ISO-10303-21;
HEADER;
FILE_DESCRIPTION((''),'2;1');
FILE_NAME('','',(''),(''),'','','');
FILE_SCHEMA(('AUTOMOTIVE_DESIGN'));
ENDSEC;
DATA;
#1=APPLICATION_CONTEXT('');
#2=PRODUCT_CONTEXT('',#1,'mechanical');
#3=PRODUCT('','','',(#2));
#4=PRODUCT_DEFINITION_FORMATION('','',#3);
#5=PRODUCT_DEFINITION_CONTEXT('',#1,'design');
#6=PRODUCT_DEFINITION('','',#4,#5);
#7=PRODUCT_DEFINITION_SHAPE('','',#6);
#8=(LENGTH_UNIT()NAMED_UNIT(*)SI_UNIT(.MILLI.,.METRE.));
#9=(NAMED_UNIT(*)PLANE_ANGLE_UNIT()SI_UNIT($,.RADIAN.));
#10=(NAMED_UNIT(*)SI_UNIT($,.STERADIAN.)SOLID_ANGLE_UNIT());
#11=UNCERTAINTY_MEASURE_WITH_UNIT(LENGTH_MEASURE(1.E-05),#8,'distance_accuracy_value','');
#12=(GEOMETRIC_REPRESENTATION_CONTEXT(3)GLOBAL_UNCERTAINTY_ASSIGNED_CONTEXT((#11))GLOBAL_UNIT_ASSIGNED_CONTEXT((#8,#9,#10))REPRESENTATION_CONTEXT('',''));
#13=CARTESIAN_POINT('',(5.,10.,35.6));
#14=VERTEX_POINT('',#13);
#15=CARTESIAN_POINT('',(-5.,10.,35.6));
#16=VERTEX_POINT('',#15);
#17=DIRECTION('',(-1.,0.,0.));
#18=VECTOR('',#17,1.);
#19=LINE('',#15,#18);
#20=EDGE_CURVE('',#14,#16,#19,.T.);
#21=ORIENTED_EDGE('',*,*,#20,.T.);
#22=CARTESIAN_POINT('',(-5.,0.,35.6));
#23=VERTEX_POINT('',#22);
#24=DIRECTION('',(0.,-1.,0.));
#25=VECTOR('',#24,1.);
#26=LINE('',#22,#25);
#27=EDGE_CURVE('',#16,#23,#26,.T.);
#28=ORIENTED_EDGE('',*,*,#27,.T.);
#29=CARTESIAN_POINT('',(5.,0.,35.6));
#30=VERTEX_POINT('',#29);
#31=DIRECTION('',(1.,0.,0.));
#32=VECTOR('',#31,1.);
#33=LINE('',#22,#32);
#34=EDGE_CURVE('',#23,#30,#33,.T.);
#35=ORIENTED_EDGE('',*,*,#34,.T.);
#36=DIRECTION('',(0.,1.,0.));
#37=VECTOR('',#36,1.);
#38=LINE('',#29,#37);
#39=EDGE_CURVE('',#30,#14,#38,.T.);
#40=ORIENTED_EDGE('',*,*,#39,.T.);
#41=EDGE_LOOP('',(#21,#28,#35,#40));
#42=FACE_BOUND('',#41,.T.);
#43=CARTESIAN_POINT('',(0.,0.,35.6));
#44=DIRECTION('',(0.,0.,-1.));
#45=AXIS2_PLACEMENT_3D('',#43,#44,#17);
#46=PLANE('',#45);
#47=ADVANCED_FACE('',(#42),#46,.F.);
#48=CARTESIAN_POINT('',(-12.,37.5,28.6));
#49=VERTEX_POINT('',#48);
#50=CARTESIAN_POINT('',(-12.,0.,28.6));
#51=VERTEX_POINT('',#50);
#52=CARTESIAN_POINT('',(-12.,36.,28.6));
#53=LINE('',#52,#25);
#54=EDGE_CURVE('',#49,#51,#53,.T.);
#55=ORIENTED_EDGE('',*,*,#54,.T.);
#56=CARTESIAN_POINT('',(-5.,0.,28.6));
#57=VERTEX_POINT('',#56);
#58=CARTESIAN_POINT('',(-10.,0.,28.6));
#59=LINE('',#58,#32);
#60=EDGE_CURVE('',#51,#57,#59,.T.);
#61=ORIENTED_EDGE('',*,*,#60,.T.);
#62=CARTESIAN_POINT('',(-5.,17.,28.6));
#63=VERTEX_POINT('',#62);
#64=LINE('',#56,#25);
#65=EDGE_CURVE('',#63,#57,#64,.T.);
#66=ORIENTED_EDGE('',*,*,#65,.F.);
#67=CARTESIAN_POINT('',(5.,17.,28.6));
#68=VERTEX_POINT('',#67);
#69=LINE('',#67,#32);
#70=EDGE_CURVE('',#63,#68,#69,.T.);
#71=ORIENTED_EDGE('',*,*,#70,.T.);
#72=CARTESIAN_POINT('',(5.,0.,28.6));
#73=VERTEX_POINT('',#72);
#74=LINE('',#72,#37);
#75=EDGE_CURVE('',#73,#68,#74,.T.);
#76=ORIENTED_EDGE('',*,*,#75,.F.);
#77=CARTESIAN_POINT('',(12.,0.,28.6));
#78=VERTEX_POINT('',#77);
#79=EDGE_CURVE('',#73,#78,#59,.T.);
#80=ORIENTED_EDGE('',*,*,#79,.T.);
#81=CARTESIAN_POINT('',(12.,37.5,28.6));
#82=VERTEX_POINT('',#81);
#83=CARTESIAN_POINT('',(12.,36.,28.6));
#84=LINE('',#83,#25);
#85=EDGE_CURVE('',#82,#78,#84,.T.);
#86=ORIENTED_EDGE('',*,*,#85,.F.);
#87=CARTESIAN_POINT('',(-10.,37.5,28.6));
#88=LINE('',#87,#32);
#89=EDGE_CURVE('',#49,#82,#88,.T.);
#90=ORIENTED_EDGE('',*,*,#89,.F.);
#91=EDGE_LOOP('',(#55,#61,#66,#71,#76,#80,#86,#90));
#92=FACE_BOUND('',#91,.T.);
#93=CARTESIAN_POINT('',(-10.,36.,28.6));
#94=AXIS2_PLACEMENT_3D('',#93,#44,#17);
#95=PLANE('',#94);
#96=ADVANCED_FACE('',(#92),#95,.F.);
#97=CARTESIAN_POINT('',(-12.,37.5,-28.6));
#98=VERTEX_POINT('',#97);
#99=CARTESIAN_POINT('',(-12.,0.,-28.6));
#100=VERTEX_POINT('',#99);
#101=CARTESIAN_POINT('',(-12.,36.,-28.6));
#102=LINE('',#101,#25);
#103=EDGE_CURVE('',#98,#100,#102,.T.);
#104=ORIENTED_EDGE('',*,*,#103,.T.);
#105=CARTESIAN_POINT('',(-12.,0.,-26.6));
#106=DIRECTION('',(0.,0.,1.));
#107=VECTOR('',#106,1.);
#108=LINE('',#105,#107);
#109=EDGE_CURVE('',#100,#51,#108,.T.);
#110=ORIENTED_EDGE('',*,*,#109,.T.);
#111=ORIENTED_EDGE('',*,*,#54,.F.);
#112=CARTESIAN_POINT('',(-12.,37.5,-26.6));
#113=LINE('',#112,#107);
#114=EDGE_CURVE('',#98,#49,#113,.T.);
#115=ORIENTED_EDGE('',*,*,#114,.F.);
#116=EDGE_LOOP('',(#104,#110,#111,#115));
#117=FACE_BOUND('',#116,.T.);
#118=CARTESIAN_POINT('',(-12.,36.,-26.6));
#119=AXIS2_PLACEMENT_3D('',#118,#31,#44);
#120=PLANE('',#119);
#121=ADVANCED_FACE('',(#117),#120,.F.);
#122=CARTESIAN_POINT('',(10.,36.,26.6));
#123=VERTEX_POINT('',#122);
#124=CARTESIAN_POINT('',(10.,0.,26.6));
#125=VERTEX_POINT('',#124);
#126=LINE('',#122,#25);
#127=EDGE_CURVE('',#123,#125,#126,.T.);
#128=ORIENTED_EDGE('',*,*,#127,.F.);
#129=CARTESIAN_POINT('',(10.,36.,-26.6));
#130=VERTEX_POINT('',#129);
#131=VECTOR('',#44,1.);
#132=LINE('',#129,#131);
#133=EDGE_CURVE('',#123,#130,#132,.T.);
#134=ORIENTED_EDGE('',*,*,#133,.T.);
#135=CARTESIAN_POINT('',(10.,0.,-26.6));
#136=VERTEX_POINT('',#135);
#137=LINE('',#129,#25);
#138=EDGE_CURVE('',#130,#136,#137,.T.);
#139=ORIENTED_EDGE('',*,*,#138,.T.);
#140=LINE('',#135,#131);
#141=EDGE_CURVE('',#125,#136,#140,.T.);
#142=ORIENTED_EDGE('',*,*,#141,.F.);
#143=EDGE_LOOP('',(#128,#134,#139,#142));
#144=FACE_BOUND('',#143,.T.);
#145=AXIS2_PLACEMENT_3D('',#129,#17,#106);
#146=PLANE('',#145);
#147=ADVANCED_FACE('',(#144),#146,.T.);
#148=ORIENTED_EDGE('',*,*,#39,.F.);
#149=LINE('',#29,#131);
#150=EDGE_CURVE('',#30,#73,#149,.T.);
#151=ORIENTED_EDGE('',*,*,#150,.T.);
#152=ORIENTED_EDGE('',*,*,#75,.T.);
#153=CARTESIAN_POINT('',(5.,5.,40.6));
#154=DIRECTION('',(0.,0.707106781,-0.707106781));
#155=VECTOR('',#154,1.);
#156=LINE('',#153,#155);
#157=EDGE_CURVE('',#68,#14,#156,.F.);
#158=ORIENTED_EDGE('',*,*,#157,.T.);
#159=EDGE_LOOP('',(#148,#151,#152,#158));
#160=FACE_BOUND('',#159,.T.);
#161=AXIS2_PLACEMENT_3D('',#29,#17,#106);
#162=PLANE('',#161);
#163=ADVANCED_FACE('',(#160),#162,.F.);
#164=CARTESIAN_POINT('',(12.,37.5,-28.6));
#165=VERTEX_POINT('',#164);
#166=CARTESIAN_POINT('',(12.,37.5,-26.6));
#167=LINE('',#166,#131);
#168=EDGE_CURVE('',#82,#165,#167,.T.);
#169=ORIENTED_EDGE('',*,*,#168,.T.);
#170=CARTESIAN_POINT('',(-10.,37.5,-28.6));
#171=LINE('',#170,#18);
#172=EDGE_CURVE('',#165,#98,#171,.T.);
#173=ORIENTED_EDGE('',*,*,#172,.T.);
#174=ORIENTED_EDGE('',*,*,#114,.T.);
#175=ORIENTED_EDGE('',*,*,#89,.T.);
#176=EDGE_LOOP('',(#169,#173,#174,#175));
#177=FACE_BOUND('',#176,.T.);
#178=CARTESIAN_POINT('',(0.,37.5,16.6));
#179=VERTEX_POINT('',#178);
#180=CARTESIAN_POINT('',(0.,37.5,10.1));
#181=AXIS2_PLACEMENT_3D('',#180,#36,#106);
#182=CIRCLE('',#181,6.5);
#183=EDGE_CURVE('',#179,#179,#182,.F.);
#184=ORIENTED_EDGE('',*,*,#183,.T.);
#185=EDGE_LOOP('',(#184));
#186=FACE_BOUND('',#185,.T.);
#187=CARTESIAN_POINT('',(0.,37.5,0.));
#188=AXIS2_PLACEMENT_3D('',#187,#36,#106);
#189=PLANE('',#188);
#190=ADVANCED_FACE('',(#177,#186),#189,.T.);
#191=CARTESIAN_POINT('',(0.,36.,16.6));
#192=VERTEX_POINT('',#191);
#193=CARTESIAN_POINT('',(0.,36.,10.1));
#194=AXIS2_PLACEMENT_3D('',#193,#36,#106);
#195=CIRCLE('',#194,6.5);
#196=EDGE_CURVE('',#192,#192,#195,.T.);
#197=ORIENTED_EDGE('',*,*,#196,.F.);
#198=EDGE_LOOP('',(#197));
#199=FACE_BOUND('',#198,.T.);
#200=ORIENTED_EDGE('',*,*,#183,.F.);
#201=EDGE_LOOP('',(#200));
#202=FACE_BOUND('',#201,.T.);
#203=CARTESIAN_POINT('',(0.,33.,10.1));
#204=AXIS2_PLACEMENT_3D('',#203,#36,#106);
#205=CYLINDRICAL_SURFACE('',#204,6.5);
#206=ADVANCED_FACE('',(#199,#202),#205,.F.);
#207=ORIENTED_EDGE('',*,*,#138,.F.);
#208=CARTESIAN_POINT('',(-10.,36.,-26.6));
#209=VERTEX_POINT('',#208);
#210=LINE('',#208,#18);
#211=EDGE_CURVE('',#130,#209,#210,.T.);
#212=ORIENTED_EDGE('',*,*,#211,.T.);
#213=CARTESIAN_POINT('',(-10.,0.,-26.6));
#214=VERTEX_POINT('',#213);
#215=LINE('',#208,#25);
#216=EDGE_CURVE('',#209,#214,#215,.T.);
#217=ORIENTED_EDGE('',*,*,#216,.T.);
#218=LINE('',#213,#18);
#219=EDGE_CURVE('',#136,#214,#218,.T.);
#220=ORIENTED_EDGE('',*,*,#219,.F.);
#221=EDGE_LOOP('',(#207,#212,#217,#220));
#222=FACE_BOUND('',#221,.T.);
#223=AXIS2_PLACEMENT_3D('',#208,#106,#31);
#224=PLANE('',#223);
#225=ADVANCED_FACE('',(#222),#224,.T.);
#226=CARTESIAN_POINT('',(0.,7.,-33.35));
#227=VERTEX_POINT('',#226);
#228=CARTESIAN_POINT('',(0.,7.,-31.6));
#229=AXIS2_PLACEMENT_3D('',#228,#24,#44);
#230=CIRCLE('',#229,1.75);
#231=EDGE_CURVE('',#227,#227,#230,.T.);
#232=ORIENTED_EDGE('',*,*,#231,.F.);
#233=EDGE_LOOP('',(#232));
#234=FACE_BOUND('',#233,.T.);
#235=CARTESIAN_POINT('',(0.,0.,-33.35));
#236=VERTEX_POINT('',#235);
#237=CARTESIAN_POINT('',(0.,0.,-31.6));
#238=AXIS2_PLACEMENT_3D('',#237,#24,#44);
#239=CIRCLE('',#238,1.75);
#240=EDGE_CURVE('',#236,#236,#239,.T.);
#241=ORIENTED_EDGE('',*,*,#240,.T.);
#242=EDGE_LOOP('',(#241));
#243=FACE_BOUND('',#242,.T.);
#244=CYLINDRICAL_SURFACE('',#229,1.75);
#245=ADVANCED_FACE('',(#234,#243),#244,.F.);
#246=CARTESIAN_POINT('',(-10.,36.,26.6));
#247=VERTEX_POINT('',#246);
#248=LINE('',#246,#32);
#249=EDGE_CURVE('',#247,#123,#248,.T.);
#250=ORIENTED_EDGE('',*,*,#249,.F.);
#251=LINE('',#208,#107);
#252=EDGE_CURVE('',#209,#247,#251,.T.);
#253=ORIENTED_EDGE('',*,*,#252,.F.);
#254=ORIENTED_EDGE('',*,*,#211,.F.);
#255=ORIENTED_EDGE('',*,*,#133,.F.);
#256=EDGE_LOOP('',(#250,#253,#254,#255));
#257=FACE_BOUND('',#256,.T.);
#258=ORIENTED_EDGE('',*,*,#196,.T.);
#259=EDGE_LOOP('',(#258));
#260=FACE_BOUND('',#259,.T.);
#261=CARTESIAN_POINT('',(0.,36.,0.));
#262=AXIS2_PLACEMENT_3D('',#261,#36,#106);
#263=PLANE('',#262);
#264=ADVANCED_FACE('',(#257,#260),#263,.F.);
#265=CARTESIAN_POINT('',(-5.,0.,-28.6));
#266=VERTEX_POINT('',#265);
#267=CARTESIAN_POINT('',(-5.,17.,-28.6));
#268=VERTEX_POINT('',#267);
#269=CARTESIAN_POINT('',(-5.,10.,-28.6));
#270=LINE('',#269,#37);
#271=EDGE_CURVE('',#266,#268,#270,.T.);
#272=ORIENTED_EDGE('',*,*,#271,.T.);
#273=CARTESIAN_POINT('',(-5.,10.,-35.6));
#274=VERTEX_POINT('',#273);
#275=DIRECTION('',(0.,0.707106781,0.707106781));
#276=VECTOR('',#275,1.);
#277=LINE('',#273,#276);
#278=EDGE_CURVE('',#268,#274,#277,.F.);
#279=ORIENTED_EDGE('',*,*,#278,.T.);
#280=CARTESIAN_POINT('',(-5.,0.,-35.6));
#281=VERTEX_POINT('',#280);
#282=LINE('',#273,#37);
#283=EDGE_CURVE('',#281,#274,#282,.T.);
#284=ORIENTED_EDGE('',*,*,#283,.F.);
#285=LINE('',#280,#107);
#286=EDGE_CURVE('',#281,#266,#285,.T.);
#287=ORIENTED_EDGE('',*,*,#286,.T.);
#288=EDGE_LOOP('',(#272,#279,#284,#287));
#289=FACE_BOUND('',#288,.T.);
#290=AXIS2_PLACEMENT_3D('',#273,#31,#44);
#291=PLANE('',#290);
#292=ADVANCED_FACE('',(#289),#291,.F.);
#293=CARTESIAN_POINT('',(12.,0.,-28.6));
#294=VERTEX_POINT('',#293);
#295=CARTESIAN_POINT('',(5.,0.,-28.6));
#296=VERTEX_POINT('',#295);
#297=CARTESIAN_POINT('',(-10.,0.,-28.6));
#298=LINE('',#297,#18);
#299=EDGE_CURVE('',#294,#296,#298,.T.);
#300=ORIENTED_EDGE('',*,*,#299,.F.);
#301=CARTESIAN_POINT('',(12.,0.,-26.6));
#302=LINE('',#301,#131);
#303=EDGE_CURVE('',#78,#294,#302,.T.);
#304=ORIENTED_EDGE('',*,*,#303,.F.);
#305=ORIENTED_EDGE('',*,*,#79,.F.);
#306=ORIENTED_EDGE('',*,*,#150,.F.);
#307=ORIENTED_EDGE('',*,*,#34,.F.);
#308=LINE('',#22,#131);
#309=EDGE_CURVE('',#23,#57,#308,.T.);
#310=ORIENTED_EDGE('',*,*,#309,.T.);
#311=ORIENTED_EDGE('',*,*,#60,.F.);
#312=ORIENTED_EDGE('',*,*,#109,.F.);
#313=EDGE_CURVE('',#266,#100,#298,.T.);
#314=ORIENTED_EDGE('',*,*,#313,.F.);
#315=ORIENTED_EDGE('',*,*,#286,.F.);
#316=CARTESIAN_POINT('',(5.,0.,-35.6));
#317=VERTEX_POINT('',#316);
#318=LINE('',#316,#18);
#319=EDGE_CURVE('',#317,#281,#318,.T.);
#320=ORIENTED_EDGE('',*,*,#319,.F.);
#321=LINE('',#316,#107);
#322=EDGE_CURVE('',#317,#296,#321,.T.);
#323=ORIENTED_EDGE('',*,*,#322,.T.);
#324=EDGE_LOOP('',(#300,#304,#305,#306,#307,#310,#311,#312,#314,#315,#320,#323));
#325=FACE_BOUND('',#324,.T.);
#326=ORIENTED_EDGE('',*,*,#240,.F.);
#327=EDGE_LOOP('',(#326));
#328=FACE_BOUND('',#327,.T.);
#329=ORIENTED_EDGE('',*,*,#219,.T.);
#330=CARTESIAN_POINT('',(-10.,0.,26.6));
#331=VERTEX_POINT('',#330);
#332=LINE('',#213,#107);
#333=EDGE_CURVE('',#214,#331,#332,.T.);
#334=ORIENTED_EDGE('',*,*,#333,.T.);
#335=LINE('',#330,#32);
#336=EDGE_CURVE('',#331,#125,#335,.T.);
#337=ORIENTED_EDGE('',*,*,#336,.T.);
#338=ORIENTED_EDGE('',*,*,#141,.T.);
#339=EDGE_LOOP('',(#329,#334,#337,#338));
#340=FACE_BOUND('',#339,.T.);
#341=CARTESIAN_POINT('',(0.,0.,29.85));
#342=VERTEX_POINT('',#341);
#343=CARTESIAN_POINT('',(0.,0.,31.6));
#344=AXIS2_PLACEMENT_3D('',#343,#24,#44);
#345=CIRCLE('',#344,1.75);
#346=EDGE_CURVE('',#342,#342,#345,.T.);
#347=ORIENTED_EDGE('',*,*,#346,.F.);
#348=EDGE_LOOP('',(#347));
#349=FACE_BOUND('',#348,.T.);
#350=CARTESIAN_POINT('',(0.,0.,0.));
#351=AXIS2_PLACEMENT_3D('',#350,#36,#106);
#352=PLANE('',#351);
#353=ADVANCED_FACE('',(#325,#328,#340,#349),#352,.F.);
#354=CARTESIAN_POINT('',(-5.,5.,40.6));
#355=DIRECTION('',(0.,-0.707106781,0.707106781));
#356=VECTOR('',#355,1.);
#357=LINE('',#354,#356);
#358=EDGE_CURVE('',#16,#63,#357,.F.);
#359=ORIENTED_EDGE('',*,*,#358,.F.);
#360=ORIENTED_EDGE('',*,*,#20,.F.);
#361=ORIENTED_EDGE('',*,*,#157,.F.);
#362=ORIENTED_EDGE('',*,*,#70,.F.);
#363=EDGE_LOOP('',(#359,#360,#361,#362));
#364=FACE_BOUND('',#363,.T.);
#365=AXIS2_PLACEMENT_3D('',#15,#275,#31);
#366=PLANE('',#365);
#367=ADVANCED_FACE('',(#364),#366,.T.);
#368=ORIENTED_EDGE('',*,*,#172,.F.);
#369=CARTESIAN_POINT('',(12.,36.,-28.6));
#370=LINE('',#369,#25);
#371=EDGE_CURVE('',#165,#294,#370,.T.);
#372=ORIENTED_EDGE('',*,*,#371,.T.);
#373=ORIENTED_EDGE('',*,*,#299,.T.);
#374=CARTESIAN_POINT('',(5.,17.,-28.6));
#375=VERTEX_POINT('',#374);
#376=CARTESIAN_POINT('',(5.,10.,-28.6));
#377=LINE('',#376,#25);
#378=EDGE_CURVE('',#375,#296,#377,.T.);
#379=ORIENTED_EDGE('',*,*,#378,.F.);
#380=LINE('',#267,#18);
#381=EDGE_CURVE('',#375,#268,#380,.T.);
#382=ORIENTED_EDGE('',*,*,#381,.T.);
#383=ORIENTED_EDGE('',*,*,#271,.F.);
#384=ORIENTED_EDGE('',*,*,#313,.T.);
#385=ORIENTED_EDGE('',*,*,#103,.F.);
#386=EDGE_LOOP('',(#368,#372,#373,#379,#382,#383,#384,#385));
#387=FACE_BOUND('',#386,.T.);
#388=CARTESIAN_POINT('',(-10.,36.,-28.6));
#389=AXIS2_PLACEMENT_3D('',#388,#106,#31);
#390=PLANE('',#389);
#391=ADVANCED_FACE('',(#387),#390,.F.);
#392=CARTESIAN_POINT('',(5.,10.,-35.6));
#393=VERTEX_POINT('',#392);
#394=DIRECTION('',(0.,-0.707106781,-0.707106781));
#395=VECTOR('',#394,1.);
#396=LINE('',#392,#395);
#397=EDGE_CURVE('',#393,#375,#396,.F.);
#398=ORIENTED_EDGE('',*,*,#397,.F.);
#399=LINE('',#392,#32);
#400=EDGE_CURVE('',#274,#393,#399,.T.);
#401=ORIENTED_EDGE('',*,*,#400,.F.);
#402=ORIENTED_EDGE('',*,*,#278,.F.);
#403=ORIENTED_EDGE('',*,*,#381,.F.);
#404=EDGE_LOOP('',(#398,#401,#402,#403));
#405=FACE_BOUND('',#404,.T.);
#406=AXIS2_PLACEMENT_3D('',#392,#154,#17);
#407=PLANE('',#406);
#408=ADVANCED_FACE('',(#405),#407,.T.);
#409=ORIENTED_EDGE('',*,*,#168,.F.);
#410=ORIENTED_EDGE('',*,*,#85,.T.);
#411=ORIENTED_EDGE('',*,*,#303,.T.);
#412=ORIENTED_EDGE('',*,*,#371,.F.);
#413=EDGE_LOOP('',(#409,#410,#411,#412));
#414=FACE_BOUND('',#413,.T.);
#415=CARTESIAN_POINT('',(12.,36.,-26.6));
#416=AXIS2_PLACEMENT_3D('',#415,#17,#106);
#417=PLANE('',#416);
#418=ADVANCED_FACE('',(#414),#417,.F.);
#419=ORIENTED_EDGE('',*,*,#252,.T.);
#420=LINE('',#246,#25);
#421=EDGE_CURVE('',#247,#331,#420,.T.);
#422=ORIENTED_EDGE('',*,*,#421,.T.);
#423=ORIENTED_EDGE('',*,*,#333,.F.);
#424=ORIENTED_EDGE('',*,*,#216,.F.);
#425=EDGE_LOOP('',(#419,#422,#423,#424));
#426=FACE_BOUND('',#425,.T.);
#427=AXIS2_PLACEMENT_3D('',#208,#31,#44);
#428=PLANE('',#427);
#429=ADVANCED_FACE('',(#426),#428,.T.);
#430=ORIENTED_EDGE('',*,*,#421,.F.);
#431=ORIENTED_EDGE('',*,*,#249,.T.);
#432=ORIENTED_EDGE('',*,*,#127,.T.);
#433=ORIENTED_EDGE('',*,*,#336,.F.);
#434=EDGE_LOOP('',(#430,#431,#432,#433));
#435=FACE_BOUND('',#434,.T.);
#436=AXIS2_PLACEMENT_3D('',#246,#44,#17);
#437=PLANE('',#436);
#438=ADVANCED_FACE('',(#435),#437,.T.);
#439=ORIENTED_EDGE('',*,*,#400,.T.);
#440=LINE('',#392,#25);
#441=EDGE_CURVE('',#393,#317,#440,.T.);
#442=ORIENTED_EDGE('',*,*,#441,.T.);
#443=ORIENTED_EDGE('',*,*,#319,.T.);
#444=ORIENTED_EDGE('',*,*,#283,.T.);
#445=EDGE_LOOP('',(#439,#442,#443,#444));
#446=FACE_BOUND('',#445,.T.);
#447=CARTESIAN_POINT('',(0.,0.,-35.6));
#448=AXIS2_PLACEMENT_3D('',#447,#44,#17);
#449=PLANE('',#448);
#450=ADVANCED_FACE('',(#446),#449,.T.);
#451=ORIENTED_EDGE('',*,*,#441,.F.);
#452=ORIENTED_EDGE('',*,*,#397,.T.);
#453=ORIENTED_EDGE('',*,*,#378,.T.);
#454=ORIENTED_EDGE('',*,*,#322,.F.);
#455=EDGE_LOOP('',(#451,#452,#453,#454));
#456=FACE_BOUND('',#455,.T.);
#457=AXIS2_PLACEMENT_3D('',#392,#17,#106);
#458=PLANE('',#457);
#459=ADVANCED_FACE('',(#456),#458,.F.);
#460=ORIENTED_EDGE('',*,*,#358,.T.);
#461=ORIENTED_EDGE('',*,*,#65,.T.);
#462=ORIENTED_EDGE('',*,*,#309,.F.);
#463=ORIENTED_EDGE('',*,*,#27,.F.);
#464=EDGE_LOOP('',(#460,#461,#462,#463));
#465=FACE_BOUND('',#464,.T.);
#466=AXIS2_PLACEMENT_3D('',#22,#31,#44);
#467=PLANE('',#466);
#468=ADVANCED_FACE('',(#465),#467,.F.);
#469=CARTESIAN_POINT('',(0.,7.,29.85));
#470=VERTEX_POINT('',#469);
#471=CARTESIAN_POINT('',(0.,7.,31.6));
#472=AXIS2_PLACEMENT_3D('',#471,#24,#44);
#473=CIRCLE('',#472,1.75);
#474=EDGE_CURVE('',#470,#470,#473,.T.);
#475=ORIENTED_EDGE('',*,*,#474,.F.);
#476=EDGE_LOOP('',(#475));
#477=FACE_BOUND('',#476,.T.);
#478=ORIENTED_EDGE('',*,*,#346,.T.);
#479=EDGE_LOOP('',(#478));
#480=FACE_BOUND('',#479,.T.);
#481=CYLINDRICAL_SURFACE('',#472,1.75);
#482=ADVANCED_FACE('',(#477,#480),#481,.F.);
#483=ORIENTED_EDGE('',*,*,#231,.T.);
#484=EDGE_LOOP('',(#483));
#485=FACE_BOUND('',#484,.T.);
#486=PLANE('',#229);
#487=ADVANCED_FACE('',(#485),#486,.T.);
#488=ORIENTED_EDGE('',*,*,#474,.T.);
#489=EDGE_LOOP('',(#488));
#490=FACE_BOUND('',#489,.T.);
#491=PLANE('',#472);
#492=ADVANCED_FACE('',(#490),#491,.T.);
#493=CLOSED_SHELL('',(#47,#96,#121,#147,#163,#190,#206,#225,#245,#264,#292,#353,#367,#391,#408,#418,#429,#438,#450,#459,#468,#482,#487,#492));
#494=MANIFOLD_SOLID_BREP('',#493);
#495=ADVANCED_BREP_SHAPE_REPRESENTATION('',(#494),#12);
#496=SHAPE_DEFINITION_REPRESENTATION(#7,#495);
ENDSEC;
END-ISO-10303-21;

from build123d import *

# Parameters (mm, degrees)
SKETCH1_W           = 20
SKETCH1_H           = 53.2
BOSS_EXTRUDE1_DEPTH = 36
SHELL1_T            = 2
SKETCH2_R           = 6.5
CUT_EXTRUDE1_DEPTH  = 5
SKETCH3_W           = 10
SKETCH3_H           = 10
BOSS_EXTRUDE2_DEPTH = 7
SKETCH4_W           = 10
SKETCH4_H           = 10
BOSS_EXTRUDE3_DEPTH = 7
SKETCH5_R           = 1.75
CUT_EXTRUDE2_DEPTH  = 7
CHAMFER1_SIZE       = 7
SKETCH6_W           = 29.413997259
SKETCH6_H           = 62.11470898
CUT_EXTRUDE3_DEPTH  = 0.5


with BuildPart() as part:
    # Sketch1 → Boss-Extrude1 (new body)
    with BuildSketch(Plane(origin=(0, 0, 0), x_dir=(1, 0, 0), z_dir=(0, 1, 0))):
        Rectangle(SKETCH1_W, SKETCH1_H)
    extrude(amount=BOSS_EXTRUDE1_DEPTH)

    # Shell1
    shell1_openings = [part.faces().sort_by_distance(p)[0] for p in [
        (0, 0, 0),
    ]]
    offset(amount=SHELL1_T, openings=shell1_openings, kind=Kind.INTERSECTION)

    # Sketch2 → Cut-Extrude1 (cut)
    with BuildSketch(Plane(origin=(0, 38, 0), x_dir=(1, 0, 0), z_dir=(0, 1, 0))):
        with Locations(Location((0, -10.1, 0), (0, 0, 270))):
            Circle(SKETCH2_R)
    extrude(amount=-CUT_EXTRUDE1_DEPTH, mode=Mode.SUBTRACT)

    # Sketch3 → Boss-Extrude2 (add)
    with BuildSketch(Plane(origin=(0, 0, -28.6), x_dir=(-1, 0, 0), z_dir=(0, 0, -1))):
        with Locations((0, 5)):
            Rectangle(SKETCH3_W, SKETCH3_H)
    extrude(amount=BOSS_EXTRUDE2_DEPTH)

    # Sketch4 → Boss-Extrude3 (add)
    with BuildSketch(Plane.XY.offset(28.6)):
        with Locations((0, 5)):
            Rectangle(SKETCH4_W, SKETCH4_H)
    extrude(amount=BOSS_EXTRUDE3_DEPTH)

    # Sketch5 → Cut-Extrude2 (cut)
    with BuildSketch(Plane.XZ):
        with Locations(Location((0, 31.6, 0), (0, 0, 270))):
            Circle(SKETCH5_R)
        with Locations(Location((0, -31.6, 0), (0, 0, 270))):
            Circle(SKETCH5_R)
    extrude(amount=-CUT_EXTRUDE2_DEPTH, mode=Mode.SUBTRACT)

    # Chamfer1
    chamfer1_edges = [part.edges().sort_by_distance(p)[0] for p in [
        (0, 10, -28.6),
        (0, 10, 28.6),
    ]]
    chamfer(chamfer1_edges, length=CHAMFER1_SIZE - 0.0001)  # a hair under: the kernel refuses the full size

    # Sketch6 → Cut-Extrude3 (cut)
    with BuildSketch(Plane(origin=(0, 38, 0), x_dir=(1, 0, 0), z_dir=(0, 1, 0))):
        with Locations((0.367646398, -0.2519266)):
            Rectangle(SKETCH6_W, SKETCH6_H)
    extrude(amount=-CUT_EXTRUDE3_DEPTH, mode=Mode.SUBTRACT)


solid = part.part
